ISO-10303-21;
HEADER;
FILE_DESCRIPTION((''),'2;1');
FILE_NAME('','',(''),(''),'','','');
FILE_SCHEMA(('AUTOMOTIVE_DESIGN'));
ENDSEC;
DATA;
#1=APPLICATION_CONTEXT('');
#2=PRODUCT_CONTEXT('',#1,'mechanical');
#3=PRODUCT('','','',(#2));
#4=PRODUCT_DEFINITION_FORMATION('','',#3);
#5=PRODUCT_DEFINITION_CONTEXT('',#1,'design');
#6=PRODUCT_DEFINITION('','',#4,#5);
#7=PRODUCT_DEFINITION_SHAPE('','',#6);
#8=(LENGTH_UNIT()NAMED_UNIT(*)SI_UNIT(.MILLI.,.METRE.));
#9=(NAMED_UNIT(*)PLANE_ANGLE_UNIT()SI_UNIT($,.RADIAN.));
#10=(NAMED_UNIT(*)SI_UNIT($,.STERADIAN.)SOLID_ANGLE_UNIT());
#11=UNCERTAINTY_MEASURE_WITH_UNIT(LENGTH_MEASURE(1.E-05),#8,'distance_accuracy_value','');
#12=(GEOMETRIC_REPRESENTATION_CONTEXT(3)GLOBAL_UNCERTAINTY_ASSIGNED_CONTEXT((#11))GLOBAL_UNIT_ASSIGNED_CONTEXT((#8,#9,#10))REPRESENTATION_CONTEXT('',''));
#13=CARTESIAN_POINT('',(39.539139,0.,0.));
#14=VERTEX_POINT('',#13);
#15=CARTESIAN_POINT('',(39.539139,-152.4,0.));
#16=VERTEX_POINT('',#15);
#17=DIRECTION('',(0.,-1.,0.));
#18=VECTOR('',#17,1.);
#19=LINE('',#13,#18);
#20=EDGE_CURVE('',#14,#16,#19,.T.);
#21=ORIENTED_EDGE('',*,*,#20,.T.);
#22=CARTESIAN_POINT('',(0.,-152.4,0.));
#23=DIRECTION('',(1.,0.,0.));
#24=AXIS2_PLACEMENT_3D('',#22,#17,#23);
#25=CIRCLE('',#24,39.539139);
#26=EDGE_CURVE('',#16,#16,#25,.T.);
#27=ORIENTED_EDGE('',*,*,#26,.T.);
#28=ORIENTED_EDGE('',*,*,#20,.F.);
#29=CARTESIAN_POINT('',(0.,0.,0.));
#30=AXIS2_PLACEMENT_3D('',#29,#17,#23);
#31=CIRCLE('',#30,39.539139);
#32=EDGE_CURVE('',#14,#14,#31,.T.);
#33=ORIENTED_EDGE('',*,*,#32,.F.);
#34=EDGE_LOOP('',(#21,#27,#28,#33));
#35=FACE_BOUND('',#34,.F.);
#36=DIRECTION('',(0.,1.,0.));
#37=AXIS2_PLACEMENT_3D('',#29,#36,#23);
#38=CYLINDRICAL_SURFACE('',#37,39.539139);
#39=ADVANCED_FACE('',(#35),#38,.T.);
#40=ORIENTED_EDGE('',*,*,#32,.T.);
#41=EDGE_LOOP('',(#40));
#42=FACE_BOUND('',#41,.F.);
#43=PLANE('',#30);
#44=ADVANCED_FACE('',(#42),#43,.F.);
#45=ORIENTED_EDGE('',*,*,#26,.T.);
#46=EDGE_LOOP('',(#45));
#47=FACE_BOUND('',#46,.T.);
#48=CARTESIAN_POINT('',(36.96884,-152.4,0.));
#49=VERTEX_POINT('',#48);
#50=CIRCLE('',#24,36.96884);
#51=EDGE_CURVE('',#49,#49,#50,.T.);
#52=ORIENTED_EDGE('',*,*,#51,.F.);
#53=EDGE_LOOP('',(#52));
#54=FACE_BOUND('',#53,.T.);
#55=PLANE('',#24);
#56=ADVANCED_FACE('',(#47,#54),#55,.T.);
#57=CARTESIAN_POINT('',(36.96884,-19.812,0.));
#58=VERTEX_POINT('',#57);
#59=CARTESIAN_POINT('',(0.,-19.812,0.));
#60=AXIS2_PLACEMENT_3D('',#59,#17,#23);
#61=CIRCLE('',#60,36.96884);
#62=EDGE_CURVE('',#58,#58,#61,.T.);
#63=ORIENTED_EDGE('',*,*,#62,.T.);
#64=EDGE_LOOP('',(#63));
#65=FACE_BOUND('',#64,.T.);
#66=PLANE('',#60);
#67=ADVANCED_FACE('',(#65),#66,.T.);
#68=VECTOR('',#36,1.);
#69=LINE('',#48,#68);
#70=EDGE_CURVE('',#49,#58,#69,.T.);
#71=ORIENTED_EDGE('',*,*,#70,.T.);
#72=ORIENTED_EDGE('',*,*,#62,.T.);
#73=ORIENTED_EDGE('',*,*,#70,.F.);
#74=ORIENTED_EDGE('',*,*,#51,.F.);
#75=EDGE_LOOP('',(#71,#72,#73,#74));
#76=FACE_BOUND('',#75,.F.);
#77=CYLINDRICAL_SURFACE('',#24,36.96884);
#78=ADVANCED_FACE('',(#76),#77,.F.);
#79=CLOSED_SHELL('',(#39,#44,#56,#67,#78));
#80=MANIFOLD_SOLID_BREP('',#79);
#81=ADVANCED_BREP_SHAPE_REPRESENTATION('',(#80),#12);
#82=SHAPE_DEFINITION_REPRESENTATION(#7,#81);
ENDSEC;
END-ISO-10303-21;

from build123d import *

# Parameters (mm, degrees)
F0_R     = 39.5391392568
F1_DEPTH = 152.4
F2_R     = 36.9688398978
F3_DEPTH = 132.588


# Not quite as in the source:
# - a feature names something its author has since deleted; it is built from what else it names


with BuildPart() as f1:
    # F0 (on Front) → F1 (new body)
    with BuildSketch(Plane.XZ):
        Circle(F0_R)
    extrude(amount=F1_DEPTH)

    # F2 (on face) → F3 (cut)
    with BuildSketch(Plane.XZ.offset(152.4)):
        Circle(F2_R)
    extrude(amount=-F3_DEPTH, mode=Mode.SUBTRACT)


solid = f1.part
